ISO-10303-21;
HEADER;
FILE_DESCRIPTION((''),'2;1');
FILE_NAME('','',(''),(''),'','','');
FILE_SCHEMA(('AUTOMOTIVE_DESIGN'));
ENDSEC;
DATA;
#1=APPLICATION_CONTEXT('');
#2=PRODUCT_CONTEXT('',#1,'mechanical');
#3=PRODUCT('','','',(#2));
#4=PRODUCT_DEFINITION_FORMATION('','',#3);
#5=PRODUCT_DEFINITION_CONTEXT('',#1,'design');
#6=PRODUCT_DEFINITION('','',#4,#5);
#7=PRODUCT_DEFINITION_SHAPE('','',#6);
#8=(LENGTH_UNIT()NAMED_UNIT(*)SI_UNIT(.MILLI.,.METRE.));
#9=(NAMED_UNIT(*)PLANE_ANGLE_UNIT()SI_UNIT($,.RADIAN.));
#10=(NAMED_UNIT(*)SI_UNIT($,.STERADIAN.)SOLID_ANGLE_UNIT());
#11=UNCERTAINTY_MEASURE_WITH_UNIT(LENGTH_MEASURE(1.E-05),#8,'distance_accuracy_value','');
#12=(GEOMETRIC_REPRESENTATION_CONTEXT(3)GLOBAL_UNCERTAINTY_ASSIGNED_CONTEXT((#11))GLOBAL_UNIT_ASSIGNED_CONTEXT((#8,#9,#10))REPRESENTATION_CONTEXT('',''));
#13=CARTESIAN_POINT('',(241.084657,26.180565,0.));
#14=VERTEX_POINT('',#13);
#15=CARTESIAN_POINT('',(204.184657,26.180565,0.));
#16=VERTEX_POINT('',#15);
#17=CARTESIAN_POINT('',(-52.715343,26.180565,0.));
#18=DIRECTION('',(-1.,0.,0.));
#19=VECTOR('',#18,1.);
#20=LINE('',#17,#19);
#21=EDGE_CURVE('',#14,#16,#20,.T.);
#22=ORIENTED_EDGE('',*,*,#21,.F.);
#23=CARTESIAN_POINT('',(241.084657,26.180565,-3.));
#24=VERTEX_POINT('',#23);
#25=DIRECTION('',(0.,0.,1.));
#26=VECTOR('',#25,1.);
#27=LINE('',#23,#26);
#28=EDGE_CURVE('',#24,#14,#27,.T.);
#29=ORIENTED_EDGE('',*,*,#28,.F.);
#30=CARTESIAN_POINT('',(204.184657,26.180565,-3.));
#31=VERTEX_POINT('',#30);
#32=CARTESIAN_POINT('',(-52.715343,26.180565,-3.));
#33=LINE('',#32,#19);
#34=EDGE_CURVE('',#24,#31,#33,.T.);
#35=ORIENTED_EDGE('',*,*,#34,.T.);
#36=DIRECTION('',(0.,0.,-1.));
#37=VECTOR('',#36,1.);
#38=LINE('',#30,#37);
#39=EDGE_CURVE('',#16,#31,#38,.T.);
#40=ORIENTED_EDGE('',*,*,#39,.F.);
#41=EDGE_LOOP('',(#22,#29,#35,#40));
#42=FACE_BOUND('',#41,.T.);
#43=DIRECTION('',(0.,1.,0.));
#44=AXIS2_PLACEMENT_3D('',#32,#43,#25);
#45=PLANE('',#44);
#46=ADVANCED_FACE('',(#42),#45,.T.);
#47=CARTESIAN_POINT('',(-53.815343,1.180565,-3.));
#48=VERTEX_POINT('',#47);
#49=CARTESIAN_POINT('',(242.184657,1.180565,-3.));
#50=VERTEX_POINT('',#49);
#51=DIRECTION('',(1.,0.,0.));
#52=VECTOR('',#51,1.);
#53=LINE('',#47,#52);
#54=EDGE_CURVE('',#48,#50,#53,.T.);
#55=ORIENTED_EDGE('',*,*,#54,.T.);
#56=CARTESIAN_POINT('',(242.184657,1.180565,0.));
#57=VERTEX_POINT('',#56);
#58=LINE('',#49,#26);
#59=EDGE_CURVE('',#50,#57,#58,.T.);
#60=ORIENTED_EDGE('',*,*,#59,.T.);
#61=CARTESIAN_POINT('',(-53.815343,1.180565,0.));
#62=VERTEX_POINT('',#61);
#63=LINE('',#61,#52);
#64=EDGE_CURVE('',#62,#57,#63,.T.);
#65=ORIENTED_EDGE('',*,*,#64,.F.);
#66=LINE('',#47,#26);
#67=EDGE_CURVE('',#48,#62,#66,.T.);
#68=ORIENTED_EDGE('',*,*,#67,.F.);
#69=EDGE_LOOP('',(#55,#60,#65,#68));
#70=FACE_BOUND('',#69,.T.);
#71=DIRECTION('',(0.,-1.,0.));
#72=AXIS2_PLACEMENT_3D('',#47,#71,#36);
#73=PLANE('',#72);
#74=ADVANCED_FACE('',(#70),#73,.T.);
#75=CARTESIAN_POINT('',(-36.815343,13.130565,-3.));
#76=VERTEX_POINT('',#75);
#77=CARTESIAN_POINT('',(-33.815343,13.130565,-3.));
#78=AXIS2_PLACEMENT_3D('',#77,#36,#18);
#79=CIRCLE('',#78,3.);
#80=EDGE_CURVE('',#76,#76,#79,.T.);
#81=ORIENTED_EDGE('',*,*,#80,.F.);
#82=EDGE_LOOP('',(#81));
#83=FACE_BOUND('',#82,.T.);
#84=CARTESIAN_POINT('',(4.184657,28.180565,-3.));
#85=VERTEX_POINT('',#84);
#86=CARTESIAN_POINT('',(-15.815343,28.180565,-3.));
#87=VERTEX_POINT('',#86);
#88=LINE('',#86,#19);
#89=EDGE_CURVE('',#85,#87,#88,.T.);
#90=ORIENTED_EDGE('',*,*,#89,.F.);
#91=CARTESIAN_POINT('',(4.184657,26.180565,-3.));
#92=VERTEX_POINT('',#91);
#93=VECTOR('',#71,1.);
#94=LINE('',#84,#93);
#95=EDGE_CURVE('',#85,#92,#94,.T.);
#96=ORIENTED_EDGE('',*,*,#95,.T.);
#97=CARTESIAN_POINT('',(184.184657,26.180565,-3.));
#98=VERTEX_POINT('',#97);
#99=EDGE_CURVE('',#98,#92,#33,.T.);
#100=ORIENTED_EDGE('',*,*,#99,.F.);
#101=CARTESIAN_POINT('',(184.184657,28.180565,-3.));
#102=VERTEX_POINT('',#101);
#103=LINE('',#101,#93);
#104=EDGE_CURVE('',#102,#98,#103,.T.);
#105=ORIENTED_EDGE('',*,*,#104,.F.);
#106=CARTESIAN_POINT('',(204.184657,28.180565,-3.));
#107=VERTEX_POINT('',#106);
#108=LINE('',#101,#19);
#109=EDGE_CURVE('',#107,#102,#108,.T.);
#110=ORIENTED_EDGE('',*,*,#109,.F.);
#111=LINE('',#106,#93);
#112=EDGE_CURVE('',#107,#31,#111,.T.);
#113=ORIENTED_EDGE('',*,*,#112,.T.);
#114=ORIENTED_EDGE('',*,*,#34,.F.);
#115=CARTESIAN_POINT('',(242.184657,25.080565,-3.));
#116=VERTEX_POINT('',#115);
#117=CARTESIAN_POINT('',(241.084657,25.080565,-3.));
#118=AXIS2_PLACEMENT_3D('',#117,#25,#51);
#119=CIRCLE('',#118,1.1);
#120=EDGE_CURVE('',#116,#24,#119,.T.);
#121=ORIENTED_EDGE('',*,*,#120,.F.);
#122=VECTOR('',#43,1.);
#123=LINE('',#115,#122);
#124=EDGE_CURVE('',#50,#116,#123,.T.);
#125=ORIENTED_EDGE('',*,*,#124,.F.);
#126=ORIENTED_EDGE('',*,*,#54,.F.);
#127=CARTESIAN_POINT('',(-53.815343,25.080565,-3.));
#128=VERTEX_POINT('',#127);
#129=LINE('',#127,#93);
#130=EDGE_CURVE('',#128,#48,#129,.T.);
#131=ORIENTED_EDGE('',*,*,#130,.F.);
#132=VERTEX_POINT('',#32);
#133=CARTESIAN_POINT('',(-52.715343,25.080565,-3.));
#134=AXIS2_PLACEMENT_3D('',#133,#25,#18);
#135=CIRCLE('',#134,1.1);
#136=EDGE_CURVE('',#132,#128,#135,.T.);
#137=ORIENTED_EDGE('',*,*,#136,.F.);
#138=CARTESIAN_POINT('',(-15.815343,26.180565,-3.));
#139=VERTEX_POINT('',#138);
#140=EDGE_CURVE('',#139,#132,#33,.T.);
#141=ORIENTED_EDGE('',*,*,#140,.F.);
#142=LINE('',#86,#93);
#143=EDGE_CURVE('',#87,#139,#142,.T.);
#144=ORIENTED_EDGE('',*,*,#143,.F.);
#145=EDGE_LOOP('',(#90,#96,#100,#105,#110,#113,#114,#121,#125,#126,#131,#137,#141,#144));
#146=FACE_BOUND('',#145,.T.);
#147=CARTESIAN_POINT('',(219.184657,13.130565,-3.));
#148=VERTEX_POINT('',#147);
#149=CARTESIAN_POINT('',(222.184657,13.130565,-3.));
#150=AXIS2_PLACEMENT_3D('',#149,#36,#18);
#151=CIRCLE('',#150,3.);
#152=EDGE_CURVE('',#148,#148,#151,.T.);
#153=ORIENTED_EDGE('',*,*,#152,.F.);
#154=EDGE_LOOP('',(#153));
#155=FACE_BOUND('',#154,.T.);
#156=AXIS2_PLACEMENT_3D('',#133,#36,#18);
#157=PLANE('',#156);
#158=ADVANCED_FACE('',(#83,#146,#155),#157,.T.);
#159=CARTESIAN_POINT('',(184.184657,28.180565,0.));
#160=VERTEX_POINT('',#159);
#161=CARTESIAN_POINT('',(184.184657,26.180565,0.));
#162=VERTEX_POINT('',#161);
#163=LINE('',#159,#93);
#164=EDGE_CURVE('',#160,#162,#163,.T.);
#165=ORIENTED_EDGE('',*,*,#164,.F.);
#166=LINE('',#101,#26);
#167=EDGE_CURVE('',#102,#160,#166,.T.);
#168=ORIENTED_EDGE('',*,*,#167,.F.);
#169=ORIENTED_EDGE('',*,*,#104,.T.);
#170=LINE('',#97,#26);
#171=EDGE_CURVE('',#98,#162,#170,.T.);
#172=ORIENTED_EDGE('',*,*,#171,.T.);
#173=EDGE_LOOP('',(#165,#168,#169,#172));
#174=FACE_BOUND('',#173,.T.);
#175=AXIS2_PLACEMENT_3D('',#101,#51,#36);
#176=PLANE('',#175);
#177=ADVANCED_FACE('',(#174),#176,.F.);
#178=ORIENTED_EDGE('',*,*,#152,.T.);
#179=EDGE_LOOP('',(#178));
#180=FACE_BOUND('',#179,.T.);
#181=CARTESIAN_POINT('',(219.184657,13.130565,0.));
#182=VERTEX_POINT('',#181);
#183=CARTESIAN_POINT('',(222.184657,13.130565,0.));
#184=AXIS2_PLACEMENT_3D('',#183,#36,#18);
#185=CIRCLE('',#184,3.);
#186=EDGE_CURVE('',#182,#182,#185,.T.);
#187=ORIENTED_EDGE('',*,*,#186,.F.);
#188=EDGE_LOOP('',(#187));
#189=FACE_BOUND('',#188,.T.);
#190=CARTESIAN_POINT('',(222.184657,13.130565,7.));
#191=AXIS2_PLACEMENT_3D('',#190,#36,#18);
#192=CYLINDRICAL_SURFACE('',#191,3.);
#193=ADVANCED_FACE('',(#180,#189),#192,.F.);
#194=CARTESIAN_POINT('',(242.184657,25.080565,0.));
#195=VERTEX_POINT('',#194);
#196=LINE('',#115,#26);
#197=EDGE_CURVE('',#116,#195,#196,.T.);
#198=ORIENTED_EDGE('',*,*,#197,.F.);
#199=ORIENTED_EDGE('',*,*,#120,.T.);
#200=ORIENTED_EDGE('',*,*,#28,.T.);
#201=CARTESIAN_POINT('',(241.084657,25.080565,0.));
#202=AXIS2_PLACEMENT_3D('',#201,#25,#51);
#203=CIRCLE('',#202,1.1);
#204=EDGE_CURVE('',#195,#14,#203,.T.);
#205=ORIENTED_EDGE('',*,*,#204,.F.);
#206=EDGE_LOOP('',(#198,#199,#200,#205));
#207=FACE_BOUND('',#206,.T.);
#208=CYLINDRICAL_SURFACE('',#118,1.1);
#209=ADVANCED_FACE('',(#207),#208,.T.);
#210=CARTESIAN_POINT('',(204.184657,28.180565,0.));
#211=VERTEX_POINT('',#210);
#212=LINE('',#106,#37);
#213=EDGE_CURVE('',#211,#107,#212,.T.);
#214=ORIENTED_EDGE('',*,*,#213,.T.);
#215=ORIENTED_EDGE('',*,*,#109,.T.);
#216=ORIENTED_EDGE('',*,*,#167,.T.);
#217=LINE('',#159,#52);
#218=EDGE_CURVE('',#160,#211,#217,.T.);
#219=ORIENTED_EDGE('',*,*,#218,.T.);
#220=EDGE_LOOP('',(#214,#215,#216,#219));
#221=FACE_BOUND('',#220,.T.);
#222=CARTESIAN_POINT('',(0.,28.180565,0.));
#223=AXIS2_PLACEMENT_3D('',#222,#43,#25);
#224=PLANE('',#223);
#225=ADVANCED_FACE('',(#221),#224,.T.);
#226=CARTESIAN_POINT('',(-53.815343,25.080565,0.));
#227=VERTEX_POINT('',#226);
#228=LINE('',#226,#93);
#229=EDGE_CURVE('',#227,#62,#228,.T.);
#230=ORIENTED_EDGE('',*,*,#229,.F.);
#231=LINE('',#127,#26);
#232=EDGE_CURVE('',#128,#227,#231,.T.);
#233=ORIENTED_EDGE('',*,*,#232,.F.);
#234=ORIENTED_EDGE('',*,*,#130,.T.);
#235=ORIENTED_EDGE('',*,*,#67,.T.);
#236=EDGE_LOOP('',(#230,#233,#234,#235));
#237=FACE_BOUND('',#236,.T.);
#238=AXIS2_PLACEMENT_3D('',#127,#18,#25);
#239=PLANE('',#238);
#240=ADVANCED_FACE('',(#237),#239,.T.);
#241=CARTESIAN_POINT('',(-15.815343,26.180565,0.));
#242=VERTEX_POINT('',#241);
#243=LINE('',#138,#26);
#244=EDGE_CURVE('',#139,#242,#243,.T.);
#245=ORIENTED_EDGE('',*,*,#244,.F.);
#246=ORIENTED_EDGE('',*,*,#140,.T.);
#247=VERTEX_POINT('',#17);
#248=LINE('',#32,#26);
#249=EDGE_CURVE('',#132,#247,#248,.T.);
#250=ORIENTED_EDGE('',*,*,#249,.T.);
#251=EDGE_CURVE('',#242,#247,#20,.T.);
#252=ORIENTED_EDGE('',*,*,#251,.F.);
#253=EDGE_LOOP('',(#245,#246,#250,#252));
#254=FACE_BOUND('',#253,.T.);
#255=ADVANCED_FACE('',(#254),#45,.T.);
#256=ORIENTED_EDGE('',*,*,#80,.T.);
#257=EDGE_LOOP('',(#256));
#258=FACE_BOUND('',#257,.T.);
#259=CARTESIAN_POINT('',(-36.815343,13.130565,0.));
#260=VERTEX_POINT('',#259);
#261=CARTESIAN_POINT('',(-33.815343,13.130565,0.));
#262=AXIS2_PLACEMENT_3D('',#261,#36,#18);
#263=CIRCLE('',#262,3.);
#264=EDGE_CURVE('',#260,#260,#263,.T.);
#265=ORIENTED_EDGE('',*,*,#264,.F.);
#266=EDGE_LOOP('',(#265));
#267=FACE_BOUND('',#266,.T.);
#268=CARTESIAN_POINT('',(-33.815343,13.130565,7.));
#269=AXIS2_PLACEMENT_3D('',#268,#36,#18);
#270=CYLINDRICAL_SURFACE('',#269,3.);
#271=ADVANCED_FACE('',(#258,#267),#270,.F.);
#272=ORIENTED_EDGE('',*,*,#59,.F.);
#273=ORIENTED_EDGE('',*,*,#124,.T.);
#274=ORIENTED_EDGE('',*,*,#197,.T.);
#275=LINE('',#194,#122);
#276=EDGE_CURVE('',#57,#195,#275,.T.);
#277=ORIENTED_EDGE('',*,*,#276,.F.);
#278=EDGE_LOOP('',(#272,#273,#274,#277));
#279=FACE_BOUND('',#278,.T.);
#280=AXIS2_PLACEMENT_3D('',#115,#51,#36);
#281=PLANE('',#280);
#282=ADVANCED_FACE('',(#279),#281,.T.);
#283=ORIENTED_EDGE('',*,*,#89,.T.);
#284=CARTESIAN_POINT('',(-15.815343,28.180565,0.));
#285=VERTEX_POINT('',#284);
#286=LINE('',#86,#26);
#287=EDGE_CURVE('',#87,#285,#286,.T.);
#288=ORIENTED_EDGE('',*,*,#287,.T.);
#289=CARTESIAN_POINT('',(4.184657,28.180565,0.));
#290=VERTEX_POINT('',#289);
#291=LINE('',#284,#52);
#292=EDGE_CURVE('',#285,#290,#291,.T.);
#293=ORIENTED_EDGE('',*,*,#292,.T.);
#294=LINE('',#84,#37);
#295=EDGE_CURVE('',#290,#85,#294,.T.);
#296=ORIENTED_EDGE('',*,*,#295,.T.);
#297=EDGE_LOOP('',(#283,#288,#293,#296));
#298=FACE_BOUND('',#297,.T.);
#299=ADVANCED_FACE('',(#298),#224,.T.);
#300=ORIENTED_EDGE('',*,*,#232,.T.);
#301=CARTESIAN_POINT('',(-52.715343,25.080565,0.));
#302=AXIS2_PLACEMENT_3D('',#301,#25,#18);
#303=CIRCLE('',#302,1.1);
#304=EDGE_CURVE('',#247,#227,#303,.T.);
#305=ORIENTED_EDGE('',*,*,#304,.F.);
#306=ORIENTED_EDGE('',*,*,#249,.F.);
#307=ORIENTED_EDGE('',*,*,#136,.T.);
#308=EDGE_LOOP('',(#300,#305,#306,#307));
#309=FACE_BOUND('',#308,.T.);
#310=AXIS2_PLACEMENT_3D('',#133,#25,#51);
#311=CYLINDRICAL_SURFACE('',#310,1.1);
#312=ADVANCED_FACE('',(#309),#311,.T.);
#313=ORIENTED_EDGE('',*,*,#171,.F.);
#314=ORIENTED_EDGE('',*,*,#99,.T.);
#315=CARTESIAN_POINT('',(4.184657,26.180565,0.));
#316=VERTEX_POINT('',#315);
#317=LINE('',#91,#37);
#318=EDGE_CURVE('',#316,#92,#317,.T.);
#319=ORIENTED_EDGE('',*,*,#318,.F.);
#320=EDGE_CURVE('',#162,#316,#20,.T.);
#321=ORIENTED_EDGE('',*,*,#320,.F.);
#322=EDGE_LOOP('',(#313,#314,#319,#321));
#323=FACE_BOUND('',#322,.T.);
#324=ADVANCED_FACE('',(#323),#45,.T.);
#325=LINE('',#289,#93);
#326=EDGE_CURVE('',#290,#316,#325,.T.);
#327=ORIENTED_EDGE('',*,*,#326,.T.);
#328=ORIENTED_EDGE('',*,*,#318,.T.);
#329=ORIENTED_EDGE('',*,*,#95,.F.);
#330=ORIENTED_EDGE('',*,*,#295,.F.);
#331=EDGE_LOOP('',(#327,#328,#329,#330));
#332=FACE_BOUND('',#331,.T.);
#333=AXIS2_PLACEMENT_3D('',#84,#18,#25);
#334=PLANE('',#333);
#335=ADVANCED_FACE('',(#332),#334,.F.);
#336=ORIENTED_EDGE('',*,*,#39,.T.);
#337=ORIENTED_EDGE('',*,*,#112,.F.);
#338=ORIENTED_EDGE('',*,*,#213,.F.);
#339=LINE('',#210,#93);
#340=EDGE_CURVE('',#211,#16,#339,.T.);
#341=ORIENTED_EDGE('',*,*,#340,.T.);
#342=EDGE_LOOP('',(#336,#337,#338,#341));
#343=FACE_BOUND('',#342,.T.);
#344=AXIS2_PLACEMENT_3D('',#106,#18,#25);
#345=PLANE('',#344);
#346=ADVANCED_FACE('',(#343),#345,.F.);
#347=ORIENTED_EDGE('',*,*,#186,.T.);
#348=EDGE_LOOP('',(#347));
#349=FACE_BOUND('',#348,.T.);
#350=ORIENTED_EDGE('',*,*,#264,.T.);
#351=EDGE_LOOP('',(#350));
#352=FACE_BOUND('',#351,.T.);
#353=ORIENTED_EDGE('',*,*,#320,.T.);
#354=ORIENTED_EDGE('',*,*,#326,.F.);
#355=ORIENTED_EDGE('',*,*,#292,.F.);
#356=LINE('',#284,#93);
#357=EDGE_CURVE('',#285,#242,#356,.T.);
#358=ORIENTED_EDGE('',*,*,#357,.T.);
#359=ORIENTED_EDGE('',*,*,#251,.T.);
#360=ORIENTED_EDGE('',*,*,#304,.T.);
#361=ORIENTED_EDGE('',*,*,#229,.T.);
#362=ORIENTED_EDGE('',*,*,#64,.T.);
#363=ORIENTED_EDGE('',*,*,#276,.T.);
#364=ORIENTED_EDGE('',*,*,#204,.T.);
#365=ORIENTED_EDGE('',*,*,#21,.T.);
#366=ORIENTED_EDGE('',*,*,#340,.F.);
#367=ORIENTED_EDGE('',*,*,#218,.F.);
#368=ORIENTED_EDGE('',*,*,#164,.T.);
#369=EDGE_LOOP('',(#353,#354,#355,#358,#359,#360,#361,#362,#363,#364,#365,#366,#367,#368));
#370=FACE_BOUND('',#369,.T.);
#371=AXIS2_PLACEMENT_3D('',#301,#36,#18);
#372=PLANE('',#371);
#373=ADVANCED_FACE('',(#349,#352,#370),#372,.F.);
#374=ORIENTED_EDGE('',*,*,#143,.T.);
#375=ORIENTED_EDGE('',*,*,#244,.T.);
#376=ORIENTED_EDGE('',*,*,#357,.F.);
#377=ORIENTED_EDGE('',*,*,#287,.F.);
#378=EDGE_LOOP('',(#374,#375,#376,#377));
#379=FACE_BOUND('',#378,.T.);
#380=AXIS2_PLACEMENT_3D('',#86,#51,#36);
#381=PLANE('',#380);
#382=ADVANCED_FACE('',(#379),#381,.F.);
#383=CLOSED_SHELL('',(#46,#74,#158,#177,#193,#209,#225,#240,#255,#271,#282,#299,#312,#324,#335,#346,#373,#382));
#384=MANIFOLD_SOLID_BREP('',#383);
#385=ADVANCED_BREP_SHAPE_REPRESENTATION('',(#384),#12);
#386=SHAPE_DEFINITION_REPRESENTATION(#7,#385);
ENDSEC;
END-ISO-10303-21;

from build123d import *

# Parameters (mm, degrees)
SM_BASE_FLANGE_1_DEPTH = 3
SKETCH_4_W             = 20
SKETCH_4_H             = 3
EXTRUDE_1_DEPTH        = 2
SKETCH_5_R             = 3
CUT_EXTRUDE_1_DEPTH    = 10


# Sheet-metal steps are written as plain solids
with BuildPart() as part:
    # Sketch 1 → Базовая кромка1 (new body)
    with BuildSketch(Plane.XY):
        with BuildLine():
            Line((-52.715343227, 26.180564784), (241.084656773, 26.180564784))
            ThreePointArc((241.084656773, 26.180564784), (241.862474232, 25.858382243), (242.184656773, 25.080564784))
            Line((242.184656773, 25.080564784), (242.184656773, 1.180564784))
            Line((242.184656773, 1.180564784), (-53.815343227, 1.180564784))
            Line((-53.815343227, 1.180564784), (-53.815343227, 25.080564784))
            ThreePointArc((-53.815343227, 25.080564784), (-53.493160687, 25.858382243), (-52.715343227, 26.180564784))
        make_face()
    extrude(amount=-SM_BASE_FLANGE_1_DEPTH)

    # Эскиз4 → Бобышка-Вытянуть1 (add)
    with BuildSketch(Plane(origin=(0, 26.180564784, 0), x_dir=(1, 0, 0), z_dir=(0, 1, 0))):
        with Locations((-5.815343227, 1.5)):
            Rectangle(SKETCH_4_W, SKETCH_4_H)
        with Locations((194.184656773, 1.5)):
            Rectangle(SKETCH_4_W, SKETCH_4_H)
    extrude(amount=EXTRUDE_1_DEPTH)

    # Эскиз5 → Вырез-Вытянуть1 (cut)
    with BuildSketch(Plane(origin=(0, 0, -3), x_dir=(-1, 0, 0), z_dir=(0, 0, -1))):
        with Locations((-222.184656773, 13.130564784)):
            Circle(SKETCH_5_R)
        with Locations((33.815343227, 13.130564784)):
            Circle(SKETCH_5_R)
    extrude(amount=-CUT_EXTRUDE_1_DEPTH, mode=Mode.SUBTRACT)


solid = part.part
